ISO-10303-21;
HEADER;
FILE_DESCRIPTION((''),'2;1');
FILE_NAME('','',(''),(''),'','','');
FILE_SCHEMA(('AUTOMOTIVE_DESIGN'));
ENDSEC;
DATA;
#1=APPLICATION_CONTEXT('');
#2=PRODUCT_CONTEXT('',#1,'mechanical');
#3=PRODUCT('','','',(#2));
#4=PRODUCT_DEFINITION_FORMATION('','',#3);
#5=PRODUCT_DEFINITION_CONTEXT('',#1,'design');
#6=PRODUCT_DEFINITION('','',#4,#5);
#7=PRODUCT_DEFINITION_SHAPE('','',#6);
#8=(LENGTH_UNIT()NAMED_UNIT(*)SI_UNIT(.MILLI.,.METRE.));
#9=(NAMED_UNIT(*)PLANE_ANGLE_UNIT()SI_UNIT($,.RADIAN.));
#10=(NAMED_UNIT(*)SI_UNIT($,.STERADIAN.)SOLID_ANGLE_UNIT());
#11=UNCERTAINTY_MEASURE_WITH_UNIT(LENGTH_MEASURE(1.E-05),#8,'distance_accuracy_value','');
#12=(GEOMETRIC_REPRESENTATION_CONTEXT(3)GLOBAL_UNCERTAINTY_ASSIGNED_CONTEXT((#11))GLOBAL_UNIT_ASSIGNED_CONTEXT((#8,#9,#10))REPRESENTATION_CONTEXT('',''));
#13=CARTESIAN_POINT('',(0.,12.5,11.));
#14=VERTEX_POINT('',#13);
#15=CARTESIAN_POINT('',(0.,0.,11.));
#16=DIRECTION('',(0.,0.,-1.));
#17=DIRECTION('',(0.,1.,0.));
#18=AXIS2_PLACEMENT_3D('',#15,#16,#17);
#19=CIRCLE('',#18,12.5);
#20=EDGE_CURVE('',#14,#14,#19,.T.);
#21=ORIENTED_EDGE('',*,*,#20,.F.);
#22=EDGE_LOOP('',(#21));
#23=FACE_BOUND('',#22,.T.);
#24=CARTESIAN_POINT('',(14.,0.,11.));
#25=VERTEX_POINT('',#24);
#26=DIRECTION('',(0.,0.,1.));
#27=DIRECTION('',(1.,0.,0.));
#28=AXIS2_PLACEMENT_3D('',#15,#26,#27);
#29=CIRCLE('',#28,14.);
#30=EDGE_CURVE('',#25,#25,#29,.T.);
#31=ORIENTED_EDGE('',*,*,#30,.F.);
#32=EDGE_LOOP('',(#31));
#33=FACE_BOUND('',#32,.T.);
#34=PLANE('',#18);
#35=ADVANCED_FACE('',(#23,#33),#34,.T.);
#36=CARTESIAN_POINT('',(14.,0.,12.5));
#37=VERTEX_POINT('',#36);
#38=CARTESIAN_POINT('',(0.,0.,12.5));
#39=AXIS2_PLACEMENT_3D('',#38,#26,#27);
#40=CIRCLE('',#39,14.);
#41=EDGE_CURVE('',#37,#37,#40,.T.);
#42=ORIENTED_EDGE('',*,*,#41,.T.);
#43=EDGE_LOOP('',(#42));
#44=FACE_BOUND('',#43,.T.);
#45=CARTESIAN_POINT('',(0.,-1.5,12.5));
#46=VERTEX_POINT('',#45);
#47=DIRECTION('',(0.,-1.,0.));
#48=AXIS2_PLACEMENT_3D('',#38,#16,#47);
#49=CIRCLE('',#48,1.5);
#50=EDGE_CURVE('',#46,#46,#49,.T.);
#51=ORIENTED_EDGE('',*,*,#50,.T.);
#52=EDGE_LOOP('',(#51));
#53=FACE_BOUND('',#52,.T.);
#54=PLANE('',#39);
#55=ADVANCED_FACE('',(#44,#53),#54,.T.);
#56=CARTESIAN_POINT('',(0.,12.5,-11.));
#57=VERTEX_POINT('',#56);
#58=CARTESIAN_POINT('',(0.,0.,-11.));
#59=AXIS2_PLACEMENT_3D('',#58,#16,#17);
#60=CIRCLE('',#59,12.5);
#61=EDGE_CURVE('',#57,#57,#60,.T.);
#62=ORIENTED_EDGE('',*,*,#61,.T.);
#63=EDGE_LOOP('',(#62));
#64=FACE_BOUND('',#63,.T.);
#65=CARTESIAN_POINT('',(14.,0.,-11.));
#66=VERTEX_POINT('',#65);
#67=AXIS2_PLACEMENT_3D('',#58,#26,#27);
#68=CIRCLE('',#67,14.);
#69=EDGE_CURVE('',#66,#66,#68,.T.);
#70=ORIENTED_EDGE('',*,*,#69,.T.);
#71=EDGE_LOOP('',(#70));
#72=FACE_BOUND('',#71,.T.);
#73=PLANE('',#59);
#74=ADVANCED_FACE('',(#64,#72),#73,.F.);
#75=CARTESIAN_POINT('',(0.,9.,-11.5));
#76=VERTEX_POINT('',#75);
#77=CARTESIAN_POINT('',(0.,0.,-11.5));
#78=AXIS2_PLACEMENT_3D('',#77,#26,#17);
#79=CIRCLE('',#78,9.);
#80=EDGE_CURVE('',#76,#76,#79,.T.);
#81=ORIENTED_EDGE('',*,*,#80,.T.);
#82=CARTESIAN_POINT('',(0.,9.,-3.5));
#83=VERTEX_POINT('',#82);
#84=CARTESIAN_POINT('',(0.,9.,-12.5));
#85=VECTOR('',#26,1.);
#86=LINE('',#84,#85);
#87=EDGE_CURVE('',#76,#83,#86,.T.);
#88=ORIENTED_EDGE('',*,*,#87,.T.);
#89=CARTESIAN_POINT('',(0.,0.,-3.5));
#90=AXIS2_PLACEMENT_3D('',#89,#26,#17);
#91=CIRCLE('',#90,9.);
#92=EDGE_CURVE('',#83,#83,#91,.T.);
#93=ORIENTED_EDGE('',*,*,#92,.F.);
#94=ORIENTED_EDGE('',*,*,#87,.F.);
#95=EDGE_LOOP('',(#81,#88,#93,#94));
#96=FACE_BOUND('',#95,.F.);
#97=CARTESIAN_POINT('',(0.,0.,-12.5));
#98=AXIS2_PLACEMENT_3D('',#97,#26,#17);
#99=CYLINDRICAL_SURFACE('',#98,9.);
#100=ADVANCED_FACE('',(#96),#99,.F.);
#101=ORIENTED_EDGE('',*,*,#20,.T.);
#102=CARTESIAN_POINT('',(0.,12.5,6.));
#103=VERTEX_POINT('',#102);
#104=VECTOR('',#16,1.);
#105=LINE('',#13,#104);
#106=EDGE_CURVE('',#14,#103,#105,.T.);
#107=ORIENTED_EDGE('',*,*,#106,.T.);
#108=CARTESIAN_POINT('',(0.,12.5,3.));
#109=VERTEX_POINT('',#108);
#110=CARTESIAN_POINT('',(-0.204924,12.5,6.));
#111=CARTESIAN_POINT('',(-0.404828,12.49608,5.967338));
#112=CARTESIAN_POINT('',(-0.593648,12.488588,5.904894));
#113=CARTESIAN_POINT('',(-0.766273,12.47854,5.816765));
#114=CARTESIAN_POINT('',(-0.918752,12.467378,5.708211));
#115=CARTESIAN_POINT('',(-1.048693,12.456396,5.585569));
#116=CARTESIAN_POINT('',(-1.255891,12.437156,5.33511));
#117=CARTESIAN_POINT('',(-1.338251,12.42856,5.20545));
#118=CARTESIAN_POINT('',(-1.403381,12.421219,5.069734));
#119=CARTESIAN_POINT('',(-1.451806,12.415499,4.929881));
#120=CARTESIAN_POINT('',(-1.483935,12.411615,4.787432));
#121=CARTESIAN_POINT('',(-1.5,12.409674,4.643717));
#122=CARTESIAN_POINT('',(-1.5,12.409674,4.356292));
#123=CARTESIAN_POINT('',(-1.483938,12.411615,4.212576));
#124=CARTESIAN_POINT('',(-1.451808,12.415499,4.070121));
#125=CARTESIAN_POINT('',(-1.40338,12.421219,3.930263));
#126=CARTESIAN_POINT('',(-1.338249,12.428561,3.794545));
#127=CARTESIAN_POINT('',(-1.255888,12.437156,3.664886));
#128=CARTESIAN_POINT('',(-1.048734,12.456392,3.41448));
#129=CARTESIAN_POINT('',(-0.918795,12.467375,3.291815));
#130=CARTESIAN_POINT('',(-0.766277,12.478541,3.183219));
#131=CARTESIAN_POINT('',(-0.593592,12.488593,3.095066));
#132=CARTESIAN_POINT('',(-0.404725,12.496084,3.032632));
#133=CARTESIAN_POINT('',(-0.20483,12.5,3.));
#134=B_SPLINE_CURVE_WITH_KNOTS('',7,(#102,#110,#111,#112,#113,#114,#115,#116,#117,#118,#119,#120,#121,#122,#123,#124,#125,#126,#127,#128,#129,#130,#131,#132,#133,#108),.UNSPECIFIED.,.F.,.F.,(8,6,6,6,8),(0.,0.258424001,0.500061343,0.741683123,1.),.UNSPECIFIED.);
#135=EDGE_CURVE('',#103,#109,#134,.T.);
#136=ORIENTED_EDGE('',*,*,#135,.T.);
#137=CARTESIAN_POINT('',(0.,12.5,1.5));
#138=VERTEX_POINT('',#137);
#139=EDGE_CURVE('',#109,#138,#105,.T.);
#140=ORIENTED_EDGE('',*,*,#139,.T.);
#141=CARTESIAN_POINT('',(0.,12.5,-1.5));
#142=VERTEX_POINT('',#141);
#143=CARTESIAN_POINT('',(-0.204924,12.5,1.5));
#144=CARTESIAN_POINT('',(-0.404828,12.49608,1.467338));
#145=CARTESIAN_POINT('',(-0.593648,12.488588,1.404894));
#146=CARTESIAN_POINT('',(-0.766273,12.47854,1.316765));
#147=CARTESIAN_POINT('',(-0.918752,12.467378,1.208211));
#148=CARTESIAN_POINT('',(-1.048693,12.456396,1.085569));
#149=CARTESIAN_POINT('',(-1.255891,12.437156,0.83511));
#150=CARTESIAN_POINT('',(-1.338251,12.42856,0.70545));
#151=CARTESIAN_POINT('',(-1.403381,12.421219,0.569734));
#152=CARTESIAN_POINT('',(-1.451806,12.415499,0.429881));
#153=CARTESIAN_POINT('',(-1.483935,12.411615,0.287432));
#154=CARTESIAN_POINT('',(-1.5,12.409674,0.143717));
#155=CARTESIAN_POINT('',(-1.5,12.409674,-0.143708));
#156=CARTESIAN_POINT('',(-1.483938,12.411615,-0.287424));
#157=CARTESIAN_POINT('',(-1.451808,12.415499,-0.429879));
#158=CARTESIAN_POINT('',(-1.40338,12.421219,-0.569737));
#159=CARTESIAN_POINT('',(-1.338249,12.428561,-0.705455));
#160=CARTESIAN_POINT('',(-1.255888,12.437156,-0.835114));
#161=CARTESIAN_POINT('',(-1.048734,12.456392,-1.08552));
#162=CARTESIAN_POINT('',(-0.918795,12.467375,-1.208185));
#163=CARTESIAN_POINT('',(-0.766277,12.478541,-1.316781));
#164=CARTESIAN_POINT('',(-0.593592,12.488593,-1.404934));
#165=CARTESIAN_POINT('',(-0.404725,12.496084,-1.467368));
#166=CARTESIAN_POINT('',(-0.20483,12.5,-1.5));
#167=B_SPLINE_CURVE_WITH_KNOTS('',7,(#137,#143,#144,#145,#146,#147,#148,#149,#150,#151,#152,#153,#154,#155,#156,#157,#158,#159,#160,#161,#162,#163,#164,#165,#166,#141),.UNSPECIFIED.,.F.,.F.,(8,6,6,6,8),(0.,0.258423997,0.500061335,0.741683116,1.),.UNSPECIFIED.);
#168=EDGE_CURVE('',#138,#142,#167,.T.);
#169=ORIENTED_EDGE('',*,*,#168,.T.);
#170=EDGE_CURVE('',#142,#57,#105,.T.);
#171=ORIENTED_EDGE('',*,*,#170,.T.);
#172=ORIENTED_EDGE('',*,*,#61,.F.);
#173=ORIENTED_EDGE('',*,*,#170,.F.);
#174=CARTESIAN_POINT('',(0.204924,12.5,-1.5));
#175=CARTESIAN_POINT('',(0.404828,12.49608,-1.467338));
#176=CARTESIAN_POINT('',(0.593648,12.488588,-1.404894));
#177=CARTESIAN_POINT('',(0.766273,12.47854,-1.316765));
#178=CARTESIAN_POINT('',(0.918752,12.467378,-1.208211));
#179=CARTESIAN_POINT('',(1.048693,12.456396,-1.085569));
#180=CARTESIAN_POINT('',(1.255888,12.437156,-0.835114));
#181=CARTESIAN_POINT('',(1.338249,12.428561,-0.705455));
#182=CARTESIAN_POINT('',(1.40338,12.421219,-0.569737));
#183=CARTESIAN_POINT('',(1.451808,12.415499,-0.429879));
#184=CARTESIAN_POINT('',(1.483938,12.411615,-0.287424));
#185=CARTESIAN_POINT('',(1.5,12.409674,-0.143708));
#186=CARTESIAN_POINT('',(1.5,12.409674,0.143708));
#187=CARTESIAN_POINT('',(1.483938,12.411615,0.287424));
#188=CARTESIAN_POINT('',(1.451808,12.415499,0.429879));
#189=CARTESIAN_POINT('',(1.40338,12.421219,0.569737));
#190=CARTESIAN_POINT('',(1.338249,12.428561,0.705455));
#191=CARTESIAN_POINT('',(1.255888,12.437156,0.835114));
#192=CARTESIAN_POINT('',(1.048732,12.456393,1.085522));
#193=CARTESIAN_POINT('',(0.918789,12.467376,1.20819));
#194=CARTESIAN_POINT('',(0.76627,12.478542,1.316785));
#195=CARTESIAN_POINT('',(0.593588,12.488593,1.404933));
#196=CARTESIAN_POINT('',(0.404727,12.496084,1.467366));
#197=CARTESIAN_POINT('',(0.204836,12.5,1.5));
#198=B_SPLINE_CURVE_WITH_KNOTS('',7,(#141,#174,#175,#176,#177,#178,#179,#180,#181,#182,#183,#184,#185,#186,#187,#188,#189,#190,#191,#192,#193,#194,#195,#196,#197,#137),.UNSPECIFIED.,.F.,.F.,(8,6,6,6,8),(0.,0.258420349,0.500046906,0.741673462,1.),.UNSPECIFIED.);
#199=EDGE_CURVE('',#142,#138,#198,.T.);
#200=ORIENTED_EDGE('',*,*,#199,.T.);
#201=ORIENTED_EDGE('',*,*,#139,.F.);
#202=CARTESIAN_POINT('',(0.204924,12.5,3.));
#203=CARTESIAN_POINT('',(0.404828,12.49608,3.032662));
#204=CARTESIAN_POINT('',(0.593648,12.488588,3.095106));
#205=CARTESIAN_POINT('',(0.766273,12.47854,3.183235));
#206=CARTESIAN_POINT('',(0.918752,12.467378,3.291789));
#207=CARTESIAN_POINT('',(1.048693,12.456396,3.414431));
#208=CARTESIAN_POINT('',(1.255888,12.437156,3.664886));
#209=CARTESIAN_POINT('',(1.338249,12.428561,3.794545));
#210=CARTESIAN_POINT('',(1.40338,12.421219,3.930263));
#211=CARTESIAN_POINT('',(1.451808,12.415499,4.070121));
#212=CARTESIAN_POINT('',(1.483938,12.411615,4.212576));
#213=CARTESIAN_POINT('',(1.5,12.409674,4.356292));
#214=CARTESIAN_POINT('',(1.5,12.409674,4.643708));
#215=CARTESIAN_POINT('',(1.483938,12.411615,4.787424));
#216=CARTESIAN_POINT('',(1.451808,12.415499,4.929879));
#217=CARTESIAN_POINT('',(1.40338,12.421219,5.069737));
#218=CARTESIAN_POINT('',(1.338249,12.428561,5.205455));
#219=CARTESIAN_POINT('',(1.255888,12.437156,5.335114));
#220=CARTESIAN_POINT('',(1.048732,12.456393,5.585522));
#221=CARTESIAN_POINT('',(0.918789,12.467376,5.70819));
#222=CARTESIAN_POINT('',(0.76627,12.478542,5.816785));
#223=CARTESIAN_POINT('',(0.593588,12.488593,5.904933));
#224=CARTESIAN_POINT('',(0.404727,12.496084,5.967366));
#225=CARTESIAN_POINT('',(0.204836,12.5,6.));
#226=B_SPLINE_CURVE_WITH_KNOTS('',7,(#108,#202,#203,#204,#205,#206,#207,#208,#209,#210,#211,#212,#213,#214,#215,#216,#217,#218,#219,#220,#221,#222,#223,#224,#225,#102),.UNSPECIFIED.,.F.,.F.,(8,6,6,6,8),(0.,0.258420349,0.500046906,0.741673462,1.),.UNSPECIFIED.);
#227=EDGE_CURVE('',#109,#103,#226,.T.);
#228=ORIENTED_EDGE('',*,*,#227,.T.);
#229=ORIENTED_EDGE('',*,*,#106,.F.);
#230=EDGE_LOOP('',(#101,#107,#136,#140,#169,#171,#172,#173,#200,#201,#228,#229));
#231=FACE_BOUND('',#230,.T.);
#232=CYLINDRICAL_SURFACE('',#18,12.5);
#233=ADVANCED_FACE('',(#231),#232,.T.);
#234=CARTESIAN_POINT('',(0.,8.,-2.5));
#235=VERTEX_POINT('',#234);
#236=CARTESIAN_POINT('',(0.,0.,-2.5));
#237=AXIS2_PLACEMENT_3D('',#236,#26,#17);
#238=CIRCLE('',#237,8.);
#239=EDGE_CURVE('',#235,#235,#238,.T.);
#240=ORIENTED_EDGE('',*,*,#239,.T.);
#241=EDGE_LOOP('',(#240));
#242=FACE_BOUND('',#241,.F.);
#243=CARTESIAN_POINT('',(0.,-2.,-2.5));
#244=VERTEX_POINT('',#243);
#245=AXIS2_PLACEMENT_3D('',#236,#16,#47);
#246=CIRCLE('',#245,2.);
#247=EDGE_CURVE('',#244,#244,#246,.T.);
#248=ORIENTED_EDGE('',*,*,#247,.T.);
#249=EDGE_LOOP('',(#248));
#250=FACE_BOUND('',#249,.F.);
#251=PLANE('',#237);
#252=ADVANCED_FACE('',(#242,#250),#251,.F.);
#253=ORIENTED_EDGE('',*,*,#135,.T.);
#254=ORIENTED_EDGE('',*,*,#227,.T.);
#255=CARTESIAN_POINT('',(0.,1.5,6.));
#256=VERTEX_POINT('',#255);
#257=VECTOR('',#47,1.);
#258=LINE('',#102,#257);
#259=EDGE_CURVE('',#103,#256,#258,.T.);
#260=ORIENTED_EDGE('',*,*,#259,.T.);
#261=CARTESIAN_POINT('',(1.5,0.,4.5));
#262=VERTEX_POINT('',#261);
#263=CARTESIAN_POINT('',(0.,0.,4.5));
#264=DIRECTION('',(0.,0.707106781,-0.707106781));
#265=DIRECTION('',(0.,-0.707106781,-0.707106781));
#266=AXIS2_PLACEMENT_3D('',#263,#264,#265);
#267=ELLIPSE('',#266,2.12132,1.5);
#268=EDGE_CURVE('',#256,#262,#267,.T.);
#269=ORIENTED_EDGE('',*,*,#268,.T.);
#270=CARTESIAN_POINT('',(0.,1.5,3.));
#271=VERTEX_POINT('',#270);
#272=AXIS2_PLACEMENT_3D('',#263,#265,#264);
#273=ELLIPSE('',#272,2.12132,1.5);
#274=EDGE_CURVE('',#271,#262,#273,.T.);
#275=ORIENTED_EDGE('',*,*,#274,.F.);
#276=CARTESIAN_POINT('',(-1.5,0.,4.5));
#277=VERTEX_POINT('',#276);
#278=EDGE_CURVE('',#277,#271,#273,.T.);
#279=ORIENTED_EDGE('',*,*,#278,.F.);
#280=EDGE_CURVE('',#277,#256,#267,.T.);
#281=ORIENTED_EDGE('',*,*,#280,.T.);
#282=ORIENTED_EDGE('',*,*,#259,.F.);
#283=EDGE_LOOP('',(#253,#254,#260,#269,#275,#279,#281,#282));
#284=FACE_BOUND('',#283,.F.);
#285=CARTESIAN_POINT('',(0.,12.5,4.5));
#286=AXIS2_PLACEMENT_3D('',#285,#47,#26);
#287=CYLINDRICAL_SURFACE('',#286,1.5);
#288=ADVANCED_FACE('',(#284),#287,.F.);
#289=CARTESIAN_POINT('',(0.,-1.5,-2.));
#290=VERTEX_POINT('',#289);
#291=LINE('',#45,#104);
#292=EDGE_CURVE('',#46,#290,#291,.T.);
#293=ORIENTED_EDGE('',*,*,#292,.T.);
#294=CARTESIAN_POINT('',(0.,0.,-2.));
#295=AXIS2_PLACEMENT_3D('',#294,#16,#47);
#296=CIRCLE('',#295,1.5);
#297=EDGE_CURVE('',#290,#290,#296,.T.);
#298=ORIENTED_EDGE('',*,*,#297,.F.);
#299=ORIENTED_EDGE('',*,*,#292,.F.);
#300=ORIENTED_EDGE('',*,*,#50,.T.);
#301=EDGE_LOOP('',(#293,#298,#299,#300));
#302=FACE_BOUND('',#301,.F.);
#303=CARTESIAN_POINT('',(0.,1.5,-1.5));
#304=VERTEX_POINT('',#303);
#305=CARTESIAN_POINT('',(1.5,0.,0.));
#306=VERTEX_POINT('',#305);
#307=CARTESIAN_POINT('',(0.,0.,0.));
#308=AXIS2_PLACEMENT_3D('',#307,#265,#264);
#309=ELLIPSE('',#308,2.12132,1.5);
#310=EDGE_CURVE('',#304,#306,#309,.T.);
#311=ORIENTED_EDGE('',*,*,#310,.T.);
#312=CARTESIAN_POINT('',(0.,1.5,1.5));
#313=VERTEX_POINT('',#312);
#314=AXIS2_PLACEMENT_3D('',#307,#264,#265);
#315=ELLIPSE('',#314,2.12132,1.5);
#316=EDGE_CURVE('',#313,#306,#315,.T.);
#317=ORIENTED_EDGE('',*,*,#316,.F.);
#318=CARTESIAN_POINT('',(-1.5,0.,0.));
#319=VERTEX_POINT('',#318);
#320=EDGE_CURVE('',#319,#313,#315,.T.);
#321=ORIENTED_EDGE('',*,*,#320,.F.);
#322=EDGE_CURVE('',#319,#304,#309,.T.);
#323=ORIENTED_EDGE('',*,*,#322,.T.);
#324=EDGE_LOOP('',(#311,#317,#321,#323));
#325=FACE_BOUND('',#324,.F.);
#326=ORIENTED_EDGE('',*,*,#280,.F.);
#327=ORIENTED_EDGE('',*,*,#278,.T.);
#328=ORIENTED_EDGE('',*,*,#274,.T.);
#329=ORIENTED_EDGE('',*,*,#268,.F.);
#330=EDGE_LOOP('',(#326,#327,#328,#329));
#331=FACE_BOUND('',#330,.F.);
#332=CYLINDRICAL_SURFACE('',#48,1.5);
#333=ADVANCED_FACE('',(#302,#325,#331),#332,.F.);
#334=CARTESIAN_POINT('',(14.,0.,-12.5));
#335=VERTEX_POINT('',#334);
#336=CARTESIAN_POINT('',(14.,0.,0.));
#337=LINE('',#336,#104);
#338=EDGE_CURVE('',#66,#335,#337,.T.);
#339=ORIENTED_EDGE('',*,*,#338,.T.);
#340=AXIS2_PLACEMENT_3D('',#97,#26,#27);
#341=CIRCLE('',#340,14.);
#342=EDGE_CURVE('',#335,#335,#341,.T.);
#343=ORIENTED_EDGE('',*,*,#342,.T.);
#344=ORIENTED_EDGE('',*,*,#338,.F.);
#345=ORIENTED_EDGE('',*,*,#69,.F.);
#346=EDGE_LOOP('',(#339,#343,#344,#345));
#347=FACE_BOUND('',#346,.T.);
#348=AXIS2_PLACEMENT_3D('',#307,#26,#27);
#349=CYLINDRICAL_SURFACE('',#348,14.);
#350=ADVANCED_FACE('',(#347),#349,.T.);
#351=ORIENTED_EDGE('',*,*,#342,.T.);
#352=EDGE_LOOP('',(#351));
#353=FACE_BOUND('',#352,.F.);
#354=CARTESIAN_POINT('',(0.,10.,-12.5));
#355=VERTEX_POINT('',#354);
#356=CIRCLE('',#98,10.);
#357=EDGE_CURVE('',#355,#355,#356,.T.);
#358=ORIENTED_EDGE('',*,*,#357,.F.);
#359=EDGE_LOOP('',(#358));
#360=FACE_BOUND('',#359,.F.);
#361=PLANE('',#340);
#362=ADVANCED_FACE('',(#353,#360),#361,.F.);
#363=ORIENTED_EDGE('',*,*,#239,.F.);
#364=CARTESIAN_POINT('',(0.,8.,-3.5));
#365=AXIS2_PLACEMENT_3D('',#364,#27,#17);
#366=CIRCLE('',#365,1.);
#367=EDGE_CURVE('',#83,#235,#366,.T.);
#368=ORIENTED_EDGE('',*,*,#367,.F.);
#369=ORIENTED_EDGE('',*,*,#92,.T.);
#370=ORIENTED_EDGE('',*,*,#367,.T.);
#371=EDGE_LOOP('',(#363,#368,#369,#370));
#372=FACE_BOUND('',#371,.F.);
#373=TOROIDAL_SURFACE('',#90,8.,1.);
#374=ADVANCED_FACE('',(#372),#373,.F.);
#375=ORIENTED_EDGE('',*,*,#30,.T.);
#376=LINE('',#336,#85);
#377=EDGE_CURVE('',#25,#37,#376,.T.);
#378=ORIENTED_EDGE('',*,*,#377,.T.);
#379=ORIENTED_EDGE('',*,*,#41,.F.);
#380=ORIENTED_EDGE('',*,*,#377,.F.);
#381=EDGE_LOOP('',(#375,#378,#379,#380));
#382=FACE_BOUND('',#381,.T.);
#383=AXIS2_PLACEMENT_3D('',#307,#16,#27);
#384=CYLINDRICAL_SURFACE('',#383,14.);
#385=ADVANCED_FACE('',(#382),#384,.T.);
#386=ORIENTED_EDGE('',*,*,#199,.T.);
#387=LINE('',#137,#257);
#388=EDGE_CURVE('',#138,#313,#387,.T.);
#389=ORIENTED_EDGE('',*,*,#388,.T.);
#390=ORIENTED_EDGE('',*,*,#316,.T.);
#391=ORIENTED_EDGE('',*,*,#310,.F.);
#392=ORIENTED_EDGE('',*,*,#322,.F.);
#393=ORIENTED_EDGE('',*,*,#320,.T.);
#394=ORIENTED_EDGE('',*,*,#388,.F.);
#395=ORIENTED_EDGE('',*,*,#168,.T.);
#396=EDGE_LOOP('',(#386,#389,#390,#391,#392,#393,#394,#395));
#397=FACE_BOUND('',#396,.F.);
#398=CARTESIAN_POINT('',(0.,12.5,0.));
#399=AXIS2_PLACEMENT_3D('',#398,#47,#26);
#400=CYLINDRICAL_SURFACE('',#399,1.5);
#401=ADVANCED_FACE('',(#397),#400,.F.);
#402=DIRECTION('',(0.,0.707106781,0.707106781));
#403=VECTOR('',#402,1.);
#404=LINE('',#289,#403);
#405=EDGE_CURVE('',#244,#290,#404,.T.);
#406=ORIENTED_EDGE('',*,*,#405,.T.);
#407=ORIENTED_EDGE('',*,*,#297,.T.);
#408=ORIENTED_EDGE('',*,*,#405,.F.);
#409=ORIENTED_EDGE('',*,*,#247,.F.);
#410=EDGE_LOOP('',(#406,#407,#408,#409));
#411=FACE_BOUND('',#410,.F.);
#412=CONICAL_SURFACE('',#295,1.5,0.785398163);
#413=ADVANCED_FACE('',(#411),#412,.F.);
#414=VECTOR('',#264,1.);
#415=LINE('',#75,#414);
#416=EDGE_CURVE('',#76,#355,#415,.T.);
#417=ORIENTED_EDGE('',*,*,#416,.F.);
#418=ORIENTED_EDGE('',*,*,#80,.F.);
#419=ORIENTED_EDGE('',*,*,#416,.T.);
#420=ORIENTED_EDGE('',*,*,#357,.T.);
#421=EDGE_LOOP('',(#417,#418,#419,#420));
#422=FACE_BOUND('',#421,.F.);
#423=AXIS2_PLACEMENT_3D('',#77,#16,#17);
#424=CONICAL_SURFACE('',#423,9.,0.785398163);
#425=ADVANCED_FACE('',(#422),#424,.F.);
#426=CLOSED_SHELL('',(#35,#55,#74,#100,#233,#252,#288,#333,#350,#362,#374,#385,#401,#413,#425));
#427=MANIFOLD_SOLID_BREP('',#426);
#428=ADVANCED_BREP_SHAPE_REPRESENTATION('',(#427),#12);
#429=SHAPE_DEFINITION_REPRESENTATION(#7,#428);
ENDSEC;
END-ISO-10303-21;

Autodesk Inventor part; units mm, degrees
ref_plane "YZ Plane" through (0, 0, 0) normal (1, 0, 0) x (0, 1, 0)
ref_plane "XZ Plane" through (0, 0, 0) normal (0, 1, 0) x (-1, 0, 0)
sketch "Náčrt1" plane through (0, 0, 0) normal (0, 0, 1) x (1, 0, 0)
  circle A0 centre (0, 0) radius 14
  dimension "d0" = 28
extrude "Vysunutí1" add sketch "Náčrt1" along normal mid plane 25
sketch "Náčrt2" plane through (0, 0, 0) normal (1, 0, 0) x (0, 1, 0)
  line L0 (-14, -12.5) -> (14, -12.5) projected
  line L1 (14, 12.5) -> (-14, 12.5) projected
  line L2 (14, -12.5) -> (14, 12.5) projected
  line L3 (14, 11) -> (12.5, 11)
  line L4 (12.5, 11) -> (12.5, -11)
  line L5 (12.5, -11) -> (14, -11)
  line L6 (14, -11) -> (14, 11)
  line L7 (14, 0) -> (-14, 0) construction
  line L8 (-14, -12.5) -> (-14, 12.5) projected
  line L9 (0, 12.5) -> (0, -12.5) construction
  point P0 (0, 0)
  point P1 (14, -11)
  dimension "d4" = 11
  dimension "d5" = 12.5
revolve "Rotace1" cut sketch "Náčrt2" angle 360 about axis through (0, 0, 12.5) along (0, 0, -1) contours L5 L4 L3 L2
sketch "Náčrt3" plane through (0, 0, -12.5) normal (0, 0, -1) x (-1, 0, 0)
  line L0 (-6, 5) -> (6, 5)
  line L1 (6, 5) -> (6, -5)
  line L2 (6, -5) -> (-6, -5)
  line L3 (-6, -5) -> (-6, 5)
  line L4 (-6, 5) -> (6, -5) construction
  line L5 (6, 5) -> (-6, -5) construction
  circle A0 centre (0, 0) radius 9
  dimension "d7" = 12
  dimension "d8" = 10
  dimension "d9" = 18
hole "Díra1" at (0, 0, -12.5) direction (0, 0, 1) diameter 18 depth 10
sketch "Náčrt4" plane through (0, 0, 12.5) normal (0, 0, 1) x (1, 0, 0)
  circle A0 centre (0, 0) radius 14 projected
hole "Díra2" at (0, 0, 12.5) direction (0, 0, -1) diameter 3 end through all
ref_plane "Pracovní rovina1" through (0, 12.5, 0) normal (0, -1, 0) x (1, 0, 0)
sketch "Náčrt5" plane through (0, 12.5, 0) normal (0, -1, 0) x (1, 0, 0)
  line L0 (1.5, -2.5) -> (-1.5, -2.5) projected
  line L1 (-9, -2.5) -> (9, -2.5) projected
  line L2 (0, 0) -> (0, -10.7479) construction
  point P0 (0, 4.5)
  dimension "d24" = 2.5
  dimension "d25" = 4.5
hole "Díra3" at (0, 12.5, 0) at (0, 12.5, 4.5) direction (0, -1, 0) diameter 3 depth 12.5
thread "Závit1" size "M3x0.5" class "6H" standard "ISO Metric profile" full length
thread "Závit2" size "M3x0.5" class "6H" standard "ISO Metric profile" full length
chamfer "Zkosení1" distance 1 angle 45 1 edges at (0, -9, -12.5)
fillet "Zaoblení1" radius 1 1 edges at (0, -9, -2.5)
chamfer "Zkosení2" distance 0.5 angle 45 1 edges at (0, 1.5, -2.5)
properties part number "Wheel" material "Mosaz, měkká žlutá"
